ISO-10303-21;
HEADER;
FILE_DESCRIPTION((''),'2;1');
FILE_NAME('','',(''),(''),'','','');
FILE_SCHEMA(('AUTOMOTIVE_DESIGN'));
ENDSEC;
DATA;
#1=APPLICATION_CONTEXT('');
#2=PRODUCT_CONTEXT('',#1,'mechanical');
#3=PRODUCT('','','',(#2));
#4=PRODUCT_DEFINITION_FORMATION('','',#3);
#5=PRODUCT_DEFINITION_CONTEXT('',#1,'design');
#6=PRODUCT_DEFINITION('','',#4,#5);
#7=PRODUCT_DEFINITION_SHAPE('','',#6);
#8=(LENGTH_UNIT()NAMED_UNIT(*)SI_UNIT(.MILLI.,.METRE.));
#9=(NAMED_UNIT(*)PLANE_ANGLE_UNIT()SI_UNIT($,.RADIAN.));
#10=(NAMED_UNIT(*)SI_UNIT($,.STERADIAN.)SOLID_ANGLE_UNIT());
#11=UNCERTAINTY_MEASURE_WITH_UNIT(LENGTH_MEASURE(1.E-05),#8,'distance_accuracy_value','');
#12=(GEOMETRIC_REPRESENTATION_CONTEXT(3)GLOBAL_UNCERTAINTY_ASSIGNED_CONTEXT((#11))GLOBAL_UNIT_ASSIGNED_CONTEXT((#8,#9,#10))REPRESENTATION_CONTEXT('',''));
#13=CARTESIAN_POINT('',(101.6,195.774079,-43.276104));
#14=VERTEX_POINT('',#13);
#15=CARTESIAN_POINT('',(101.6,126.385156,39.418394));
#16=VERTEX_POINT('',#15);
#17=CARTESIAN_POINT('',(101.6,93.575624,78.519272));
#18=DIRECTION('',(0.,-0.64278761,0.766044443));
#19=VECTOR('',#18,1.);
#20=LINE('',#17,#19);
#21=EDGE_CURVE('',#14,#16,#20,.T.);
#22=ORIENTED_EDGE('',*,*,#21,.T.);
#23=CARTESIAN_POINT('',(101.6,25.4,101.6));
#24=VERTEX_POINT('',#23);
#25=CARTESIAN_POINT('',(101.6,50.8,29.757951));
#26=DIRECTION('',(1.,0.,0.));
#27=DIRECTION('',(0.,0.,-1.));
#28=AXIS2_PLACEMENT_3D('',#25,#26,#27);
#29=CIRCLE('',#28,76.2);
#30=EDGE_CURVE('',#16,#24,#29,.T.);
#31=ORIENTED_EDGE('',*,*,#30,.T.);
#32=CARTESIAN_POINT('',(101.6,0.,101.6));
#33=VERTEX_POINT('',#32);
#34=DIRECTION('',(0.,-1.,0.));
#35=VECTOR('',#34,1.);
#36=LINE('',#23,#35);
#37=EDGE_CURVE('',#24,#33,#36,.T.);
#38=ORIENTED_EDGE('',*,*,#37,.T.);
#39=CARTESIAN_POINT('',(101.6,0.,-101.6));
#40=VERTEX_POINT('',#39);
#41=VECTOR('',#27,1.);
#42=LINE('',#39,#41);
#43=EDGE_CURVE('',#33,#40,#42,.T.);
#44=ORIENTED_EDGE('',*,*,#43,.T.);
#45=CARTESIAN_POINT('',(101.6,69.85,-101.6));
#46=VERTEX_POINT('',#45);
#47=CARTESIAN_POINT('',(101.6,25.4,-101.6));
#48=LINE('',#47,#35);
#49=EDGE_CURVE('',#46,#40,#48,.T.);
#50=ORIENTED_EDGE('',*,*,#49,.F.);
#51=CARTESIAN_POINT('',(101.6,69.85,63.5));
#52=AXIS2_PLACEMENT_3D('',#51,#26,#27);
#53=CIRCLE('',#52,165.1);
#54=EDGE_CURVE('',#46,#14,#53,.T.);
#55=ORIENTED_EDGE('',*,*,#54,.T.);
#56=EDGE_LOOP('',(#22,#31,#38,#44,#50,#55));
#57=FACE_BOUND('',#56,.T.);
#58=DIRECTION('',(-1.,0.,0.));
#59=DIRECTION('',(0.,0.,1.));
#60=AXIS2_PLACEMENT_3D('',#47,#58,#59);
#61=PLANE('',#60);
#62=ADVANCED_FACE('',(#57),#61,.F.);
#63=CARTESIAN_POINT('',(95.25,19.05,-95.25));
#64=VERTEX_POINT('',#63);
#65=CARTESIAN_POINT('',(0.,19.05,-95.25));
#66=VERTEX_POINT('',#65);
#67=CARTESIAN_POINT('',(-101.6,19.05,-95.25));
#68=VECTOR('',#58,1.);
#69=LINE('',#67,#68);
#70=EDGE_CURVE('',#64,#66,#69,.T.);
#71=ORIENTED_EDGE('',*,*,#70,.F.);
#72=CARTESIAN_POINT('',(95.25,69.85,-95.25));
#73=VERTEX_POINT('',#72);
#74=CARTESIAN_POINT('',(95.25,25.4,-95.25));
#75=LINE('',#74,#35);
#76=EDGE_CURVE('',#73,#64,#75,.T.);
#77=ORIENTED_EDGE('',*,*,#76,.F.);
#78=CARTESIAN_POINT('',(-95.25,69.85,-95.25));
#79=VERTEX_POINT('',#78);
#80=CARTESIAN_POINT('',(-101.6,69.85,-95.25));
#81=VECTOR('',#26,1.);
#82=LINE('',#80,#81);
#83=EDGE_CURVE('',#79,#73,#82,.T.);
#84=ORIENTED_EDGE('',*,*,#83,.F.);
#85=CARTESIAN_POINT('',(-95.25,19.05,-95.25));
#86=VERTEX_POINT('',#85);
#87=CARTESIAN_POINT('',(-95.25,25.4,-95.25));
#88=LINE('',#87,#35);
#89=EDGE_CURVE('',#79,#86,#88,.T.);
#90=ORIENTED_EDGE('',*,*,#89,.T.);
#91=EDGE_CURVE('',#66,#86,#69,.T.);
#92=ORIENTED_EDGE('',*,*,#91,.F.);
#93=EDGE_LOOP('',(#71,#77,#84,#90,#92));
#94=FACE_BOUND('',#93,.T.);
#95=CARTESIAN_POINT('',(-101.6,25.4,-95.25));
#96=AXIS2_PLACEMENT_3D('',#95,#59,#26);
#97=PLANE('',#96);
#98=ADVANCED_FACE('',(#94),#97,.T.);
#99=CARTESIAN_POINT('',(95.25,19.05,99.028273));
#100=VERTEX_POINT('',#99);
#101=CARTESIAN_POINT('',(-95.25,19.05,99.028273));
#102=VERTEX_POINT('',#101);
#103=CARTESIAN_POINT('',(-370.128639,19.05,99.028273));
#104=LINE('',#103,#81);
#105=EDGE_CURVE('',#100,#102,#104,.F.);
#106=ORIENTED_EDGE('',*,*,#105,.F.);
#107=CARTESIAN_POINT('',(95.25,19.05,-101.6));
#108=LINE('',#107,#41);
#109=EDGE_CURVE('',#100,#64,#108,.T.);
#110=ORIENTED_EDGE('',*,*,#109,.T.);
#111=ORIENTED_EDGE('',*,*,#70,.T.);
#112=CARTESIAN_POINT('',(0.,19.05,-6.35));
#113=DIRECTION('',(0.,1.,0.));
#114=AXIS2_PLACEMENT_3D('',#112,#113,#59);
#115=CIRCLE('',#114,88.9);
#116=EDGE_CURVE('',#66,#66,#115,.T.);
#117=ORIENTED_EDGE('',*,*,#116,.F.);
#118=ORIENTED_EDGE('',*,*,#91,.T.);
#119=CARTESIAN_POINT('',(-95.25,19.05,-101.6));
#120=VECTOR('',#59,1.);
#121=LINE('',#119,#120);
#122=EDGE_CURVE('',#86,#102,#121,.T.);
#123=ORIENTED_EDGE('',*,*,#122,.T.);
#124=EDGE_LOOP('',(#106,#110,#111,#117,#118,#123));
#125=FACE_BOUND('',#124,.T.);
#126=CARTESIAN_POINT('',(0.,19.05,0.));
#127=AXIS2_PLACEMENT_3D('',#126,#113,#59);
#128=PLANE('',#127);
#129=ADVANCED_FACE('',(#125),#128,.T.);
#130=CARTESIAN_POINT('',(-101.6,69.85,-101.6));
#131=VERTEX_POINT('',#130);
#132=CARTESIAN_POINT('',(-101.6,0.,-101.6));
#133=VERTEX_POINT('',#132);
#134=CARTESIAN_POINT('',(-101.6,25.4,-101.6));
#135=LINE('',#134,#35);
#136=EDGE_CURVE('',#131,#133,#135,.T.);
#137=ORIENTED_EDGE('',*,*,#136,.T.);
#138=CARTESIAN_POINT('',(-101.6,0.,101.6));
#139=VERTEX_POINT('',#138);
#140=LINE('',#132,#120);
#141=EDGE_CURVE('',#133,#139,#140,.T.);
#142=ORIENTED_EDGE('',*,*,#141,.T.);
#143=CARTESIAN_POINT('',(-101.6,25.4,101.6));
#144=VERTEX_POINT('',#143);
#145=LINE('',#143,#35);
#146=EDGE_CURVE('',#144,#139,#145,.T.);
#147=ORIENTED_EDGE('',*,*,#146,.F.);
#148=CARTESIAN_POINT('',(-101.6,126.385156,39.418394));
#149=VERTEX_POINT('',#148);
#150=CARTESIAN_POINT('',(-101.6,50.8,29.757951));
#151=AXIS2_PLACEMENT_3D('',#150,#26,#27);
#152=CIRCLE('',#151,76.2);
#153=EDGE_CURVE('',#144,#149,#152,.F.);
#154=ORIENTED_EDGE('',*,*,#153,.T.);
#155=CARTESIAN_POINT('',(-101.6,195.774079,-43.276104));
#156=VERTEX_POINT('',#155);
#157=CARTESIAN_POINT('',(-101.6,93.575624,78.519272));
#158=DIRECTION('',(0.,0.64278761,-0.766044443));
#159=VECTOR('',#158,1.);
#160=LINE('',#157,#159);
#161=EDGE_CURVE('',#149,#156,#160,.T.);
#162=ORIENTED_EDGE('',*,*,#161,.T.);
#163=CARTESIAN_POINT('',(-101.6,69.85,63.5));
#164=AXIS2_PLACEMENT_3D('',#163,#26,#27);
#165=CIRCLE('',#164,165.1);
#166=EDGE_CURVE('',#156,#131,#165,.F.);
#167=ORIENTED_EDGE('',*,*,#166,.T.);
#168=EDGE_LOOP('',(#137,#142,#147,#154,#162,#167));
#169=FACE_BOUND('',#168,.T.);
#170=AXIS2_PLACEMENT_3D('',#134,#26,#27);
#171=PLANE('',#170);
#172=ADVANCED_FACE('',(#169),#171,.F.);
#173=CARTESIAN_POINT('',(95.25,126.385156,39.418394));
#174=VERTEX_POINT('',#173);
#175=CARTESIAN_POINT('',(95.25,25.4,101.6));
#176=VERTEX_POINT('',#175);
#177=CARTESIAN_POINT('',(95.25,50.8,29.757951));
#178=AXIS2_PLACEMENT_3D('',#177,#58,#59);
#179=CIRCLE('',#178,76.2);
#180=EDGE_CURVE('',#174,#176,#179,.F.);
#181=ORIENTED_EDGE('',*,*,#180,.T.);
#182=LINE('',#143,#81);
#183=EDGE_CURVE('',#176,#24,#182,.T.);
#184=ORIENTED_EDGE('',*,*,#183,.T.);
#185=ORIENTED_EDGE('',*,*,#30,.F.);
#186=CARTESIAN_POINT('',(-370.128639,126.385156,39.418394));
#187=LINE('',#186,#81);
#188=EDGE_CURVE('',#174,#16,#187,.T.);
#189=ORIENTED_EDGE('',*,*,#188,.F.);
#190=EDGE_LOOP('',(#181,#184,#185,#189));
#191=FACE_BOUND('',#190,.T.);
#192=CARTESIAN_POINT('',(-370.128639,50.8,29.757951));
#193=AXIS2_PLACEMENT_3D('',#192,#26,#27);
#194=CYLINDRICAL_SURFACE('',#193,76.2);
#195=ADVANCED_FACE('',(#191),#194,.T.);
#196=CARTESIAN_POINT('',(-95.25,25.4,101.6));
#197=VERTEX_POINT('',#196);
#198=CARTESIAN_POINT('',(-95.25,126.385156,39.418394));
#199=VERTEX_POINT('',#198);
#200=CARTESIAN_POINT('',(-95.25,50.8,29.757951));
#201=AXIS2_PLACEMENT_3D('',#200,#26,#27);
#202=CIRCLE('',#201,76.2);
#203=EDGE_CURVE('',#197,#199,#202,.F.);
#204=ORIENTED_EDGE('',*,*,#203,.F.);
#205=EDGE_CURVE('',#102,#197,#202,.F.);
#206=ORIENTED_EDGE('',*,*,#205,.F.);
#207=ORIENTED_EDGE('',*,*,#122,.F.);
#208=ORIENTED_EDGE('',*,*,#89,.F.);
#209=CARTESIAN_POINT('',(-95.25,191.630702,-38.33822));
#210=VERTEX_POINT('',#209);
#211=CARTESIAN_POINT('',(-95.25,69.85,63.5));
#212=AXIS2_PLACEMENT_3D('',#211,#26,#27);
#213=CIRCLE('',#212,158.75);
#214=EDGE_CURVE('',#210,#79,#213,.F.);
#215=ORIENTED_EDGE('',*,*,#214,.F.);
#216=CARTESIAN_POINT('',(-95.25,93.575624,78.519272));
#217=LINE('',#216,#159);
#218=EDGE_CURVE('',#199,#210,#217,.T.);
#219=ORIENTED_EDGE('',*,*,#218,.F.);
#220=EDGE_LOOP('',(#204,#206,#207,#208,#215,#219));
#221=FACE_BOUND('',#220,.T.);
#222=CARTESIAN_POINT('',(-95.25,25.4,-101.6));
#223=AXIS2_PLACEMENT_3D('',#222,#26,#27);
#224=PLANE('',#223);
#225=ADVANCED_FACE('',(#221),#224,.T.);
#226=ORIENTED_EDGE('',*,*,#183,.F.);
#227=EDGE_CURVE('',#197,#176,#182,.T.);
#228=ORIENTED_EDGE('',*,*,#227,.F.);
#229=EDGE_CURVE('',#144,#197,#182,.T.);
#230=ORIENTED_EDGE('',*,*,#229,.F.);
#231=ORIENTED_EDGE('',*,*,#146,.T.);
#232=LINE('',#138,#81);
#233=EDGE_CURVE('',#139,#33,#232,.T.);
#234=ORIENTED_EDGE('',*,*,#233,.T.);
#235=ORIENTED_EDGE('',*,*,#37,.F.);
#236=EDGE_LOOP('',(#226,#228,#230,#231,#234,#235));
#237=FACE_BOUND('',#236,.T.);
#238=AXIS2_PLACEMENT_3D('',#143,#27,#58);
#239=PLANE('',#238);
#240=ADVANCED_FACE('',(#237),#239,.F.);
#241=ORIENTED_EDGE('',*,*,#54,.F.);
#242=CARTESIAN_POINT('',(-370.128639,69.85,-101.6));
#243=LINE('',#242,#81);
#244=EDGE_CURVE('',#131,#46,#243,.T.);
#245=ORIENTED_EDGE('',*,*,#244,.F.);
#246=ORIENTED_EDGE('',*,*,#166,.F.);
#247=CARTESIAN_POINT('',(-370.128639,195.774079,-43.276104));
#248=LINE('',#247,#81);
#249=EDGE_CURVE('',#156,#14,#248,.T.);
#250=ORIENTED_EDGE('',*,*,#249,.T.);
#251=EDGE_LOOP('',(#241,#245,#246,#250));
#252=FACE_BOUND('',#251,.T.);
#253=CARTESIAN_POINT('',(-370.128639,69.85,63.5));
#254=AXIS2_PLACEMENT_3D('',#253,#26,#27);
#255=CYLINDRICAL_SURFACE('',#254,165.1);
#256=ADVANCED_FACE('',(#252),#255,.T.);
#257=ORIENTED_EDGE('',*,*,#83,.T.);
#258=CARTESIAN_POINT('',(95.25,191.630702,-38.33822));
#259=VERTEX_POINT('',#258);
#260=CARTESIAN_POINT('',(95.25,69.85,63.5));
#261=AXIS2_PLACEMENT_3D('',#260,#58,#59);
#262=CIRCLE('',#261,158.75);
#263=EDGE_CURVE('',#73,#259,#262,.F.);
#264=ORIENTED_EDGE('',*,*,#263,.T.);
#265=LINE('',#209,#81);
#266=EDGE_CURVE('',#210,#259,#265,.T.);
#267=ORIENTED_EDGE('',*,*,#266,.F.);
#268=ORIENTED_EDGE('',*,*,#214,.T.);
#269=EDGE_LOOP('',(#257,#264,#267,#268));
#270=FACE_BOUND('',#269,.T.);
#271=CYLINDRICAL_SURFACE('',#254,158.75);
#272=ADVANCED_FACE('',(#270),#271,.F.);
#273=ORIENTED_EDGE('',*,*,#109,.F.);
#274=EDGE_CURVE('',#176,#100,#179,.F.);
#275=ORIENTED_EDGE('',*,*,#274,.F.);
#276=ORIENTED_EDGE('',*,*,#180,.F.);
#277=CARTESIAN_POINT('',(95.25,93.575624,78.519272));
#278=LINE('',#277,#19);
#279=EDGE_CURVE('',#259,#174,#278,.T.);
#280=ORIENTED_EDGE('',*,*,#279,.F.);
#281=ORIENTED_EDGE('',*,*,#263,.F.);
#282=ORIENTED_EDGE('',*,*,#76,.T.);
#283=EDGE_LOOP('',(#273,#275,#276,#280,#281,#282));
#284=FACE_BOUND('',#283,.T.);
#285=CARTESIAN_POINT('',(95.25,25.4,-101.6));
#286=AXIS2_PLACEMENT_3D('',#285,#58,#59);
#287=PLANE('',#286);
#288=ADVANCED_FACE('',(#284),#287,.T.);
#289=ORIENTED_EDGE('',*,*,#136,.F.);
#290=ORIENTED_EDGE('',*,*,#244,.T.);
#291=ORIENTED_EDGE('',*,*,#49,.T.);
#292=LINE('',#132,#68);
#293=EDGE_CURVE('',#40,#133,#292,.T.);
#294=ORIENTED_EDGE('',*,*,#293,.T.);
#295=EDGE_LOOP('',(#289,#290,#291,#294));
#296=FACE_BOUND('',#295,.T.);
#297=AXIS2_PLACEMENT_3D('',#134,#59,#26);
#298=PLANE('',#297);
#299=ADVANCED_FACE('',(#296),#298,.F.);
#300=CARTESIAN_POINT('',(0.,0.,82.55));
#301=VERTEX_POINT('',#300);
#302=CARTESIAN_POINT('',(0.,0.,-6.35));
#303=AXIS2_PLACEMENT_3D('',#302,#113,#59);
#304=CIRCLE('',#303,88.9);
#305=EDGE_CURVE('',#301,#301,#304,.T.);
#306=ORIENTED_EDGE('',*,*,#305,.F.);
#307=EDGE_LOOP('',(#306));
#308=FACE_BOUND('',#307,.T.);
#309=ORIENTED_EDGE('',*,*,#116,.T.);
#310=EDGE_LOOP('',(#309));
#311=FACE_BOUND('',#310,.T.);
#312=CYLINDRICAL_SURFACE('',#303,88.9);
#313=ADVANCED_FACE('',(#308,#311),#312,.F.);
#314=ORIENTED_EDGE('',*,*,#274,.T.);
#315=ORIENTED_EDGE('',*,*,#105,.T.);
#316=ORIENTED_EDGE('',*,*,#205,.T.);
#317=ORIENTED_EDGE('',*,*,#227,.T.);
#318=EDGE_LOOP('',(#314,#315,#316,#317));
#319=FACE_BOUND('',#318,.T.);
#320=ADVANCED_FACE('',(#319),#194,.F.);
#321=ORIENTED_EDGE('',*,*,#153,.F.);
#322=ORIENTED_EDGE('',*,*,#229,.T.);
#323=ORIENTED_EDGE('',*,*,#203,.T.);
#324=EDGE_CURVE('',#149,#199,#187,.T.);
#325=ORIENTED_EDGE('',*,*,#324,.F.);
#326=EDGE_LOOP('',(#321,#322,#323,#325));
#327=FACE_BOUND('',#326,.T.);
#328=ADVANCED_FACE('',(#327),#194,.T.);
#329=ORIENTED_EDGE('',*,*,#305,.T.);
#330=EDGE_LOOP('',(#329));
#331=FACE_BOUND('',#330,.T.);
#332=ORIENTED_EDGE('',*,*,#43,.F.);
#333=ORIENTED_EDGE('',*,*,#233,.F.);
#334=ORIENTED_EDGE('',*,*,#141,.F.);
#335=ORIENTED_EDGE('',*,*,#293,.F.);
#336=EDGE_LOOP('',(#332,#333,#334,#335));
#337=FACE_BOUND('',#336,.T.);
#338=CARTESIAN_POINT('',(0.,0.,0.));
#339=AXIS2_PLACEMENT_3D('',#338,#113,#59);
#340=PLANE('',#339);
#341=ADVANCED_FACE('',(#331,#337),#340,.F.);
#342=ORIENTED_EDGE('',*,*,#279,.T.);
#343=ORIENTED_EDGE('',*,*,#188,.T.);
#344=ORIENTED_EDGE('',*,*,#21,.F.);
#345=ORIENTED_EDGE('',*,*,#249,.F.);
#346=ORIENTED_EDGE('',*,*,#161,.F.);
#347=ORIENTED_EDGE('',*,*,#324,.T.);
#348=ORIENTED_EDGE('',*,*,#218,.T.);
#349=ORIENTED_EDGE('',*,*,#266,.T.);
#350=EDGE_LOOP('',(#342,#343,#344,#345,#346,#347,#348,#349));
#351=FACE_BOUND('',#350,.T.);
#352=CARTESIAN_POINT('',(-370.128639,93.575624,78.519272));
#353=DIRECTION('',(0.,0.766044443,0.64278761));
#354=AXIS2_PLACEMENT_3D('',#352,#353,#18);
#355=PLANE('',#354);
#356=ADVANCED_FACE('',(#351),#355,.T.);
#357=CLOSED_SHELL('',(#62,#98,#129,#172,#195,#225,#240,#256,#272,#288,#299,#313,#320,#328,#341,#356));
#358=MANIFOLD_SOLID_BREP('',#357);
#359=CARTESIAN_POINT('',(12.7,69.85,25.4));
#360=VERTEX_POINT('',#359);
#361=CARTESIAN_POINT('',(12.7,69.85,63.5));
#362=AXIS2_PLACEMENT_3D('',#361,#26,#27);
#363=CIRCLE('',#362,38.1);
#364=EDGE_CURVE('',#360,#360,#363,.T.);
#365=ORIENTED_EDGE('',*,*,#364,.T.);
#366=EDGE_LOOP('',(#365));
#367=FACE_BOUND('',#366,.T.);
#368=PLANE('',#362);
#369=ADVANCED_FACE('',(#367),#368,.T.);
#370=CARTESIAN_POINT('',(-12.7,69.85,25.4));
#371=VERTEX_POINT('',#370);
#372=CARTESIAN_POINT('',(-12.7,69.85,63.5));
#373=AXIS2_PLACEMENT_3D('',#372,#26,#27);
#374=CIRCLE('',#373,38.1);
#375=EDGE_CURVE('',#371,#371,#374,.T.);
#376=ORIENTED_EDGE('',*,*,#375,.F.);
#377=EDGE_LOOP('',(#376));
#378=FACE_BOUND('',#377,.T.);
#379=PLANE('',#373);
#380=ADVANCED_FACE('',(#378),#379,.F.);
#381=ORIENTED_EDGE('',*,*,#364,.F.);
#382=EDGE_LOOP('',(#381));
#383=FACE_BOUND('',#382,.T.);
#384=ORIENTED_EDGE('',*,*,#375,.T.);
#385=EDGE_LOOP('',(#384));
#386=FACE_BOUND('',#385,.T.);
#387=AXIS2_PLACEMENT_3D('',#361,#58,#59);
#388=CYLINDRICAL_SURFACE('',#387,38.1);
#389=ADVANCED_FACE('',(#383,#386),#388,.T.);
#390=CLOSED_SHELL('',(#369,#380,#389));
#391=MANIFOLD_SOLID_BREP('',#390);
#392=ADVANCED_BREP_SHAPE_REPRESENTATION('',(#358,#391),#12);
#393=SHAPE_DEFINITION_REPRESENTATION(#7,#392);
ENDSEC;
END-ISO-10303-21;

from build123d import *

# Parameters (mm, degrees)
SKETCH2_W           = 203.2
SKETCH2_H           = 203.2
BOSS_EXTRUDE1_DEPTH = 25.4
BOSS_EXTRUDE2_DEPTH = 203.2
SHELL1_START        = -95.25
SHELL1_DEPTH        = 190.5
SKETCH6_R           = 38.1
BOSS_EXTRUDE3_DEPTH = 12.7
SKETCH7_R           = 88.9
CUT_EXTRUDE1_DEPTH  = 230.741261845


# Read off the part's stored shape, not the designer's step: Shell1
with BuildPart() as part:
    # Sketch2 → Boss-Extrude1 (new body)
    with BuildSketch(Plane(origin=(0, 0, 0), x_dir=(1, 0, 0), z_dir=(0, 1, 0))):
        Rectangle(SKETCH2_W, SKETCH2_H)
    extrude(amount=BOSS_EXTRUDE1_DEPTH)

    # Sketch3 → Boss-Extrude2 (add)
    with BuildSketch(Plane(origin=(101.6, 0, 0), x_dir=(0, 0, -1), z_dir=(1, 0, 0))):
        with BuildLine():
            Line((-101.6, 25.4), (101.6, 25.4))
            Line((101.6, 25.4), (101.6, 69.85))
            ThreePointArc((101.6, 69.85), (86.311122378, 139.237589754), (43.276104035, 195.774078742))
            Line((43.276104035, 195.774078742), (-39.4183936, 126.385156277))
            ThreePointArc((-39.4183936, 126.385156277), (-94.643731282, 90.753416891), (-101.6, 25.4))
        make_face()
    extrude(amount=-BOSS_EXTRUDE2_DEPTH)

    # Shell1 outline → Shell1 (cut)
    with BuildSketch(Plane.YZ.offset(SHELL1_START)):
        with BuildLine():
            Line((19.05, -95.25), (69.85, -95.25))
            ThreePointArc((69.85, -95.25), (137.061401768, -80.31999156), (191.630702174, -38.338220124))
            Line((191.630702174, -38.338220124), (126.385156277, 39.4183936))
            ThreePointArc((126.385156277, 39.4183936), (90.753416891, 94.643731282), (25.4, 101.6))
            ThreePointArc((25.4, 101.6), (22.196082961, 100.385537214), (19.05, 99.028272959))
            Line((19.05, 99.028272959), (19.05, -95.25))
        make_face()
    extrude(amount=SHELL1_DEPTH, mode=Mode.SUBTRACT)

    # Sketch7 → Cut-Extrude1 (cut, through all)
    with BuildSketch(Plane(origin=(0, 19.05, 0), x_dir=(1, 0, 0), z_dir=(0, 1, 0))):
        with Locations(Location((0, 6.35, 0), (0, 0, 270))):
            Circle(SKETCH7_R)
    extrude(amount=-CUT_EXTRUDE1_DEPTH, mode=Mode.SUBTRACT)


with BuildPart() as body_2:
    # Sketch6 → Boss-Extrude3 (new, symmetric)
    with BuildSketch(Plane(origin=(0, 0, 0), x_dir=(0, 0, -1), z_dir=(1, 0, 0))):
        with Locations((-63.5, 69.85)):
            Circle(SKETCH6_R)
    extrude(amount=BOSS_EXTRUDE3_DEPTH, both=True)


solid = Compound([part.part, body_2.part])
